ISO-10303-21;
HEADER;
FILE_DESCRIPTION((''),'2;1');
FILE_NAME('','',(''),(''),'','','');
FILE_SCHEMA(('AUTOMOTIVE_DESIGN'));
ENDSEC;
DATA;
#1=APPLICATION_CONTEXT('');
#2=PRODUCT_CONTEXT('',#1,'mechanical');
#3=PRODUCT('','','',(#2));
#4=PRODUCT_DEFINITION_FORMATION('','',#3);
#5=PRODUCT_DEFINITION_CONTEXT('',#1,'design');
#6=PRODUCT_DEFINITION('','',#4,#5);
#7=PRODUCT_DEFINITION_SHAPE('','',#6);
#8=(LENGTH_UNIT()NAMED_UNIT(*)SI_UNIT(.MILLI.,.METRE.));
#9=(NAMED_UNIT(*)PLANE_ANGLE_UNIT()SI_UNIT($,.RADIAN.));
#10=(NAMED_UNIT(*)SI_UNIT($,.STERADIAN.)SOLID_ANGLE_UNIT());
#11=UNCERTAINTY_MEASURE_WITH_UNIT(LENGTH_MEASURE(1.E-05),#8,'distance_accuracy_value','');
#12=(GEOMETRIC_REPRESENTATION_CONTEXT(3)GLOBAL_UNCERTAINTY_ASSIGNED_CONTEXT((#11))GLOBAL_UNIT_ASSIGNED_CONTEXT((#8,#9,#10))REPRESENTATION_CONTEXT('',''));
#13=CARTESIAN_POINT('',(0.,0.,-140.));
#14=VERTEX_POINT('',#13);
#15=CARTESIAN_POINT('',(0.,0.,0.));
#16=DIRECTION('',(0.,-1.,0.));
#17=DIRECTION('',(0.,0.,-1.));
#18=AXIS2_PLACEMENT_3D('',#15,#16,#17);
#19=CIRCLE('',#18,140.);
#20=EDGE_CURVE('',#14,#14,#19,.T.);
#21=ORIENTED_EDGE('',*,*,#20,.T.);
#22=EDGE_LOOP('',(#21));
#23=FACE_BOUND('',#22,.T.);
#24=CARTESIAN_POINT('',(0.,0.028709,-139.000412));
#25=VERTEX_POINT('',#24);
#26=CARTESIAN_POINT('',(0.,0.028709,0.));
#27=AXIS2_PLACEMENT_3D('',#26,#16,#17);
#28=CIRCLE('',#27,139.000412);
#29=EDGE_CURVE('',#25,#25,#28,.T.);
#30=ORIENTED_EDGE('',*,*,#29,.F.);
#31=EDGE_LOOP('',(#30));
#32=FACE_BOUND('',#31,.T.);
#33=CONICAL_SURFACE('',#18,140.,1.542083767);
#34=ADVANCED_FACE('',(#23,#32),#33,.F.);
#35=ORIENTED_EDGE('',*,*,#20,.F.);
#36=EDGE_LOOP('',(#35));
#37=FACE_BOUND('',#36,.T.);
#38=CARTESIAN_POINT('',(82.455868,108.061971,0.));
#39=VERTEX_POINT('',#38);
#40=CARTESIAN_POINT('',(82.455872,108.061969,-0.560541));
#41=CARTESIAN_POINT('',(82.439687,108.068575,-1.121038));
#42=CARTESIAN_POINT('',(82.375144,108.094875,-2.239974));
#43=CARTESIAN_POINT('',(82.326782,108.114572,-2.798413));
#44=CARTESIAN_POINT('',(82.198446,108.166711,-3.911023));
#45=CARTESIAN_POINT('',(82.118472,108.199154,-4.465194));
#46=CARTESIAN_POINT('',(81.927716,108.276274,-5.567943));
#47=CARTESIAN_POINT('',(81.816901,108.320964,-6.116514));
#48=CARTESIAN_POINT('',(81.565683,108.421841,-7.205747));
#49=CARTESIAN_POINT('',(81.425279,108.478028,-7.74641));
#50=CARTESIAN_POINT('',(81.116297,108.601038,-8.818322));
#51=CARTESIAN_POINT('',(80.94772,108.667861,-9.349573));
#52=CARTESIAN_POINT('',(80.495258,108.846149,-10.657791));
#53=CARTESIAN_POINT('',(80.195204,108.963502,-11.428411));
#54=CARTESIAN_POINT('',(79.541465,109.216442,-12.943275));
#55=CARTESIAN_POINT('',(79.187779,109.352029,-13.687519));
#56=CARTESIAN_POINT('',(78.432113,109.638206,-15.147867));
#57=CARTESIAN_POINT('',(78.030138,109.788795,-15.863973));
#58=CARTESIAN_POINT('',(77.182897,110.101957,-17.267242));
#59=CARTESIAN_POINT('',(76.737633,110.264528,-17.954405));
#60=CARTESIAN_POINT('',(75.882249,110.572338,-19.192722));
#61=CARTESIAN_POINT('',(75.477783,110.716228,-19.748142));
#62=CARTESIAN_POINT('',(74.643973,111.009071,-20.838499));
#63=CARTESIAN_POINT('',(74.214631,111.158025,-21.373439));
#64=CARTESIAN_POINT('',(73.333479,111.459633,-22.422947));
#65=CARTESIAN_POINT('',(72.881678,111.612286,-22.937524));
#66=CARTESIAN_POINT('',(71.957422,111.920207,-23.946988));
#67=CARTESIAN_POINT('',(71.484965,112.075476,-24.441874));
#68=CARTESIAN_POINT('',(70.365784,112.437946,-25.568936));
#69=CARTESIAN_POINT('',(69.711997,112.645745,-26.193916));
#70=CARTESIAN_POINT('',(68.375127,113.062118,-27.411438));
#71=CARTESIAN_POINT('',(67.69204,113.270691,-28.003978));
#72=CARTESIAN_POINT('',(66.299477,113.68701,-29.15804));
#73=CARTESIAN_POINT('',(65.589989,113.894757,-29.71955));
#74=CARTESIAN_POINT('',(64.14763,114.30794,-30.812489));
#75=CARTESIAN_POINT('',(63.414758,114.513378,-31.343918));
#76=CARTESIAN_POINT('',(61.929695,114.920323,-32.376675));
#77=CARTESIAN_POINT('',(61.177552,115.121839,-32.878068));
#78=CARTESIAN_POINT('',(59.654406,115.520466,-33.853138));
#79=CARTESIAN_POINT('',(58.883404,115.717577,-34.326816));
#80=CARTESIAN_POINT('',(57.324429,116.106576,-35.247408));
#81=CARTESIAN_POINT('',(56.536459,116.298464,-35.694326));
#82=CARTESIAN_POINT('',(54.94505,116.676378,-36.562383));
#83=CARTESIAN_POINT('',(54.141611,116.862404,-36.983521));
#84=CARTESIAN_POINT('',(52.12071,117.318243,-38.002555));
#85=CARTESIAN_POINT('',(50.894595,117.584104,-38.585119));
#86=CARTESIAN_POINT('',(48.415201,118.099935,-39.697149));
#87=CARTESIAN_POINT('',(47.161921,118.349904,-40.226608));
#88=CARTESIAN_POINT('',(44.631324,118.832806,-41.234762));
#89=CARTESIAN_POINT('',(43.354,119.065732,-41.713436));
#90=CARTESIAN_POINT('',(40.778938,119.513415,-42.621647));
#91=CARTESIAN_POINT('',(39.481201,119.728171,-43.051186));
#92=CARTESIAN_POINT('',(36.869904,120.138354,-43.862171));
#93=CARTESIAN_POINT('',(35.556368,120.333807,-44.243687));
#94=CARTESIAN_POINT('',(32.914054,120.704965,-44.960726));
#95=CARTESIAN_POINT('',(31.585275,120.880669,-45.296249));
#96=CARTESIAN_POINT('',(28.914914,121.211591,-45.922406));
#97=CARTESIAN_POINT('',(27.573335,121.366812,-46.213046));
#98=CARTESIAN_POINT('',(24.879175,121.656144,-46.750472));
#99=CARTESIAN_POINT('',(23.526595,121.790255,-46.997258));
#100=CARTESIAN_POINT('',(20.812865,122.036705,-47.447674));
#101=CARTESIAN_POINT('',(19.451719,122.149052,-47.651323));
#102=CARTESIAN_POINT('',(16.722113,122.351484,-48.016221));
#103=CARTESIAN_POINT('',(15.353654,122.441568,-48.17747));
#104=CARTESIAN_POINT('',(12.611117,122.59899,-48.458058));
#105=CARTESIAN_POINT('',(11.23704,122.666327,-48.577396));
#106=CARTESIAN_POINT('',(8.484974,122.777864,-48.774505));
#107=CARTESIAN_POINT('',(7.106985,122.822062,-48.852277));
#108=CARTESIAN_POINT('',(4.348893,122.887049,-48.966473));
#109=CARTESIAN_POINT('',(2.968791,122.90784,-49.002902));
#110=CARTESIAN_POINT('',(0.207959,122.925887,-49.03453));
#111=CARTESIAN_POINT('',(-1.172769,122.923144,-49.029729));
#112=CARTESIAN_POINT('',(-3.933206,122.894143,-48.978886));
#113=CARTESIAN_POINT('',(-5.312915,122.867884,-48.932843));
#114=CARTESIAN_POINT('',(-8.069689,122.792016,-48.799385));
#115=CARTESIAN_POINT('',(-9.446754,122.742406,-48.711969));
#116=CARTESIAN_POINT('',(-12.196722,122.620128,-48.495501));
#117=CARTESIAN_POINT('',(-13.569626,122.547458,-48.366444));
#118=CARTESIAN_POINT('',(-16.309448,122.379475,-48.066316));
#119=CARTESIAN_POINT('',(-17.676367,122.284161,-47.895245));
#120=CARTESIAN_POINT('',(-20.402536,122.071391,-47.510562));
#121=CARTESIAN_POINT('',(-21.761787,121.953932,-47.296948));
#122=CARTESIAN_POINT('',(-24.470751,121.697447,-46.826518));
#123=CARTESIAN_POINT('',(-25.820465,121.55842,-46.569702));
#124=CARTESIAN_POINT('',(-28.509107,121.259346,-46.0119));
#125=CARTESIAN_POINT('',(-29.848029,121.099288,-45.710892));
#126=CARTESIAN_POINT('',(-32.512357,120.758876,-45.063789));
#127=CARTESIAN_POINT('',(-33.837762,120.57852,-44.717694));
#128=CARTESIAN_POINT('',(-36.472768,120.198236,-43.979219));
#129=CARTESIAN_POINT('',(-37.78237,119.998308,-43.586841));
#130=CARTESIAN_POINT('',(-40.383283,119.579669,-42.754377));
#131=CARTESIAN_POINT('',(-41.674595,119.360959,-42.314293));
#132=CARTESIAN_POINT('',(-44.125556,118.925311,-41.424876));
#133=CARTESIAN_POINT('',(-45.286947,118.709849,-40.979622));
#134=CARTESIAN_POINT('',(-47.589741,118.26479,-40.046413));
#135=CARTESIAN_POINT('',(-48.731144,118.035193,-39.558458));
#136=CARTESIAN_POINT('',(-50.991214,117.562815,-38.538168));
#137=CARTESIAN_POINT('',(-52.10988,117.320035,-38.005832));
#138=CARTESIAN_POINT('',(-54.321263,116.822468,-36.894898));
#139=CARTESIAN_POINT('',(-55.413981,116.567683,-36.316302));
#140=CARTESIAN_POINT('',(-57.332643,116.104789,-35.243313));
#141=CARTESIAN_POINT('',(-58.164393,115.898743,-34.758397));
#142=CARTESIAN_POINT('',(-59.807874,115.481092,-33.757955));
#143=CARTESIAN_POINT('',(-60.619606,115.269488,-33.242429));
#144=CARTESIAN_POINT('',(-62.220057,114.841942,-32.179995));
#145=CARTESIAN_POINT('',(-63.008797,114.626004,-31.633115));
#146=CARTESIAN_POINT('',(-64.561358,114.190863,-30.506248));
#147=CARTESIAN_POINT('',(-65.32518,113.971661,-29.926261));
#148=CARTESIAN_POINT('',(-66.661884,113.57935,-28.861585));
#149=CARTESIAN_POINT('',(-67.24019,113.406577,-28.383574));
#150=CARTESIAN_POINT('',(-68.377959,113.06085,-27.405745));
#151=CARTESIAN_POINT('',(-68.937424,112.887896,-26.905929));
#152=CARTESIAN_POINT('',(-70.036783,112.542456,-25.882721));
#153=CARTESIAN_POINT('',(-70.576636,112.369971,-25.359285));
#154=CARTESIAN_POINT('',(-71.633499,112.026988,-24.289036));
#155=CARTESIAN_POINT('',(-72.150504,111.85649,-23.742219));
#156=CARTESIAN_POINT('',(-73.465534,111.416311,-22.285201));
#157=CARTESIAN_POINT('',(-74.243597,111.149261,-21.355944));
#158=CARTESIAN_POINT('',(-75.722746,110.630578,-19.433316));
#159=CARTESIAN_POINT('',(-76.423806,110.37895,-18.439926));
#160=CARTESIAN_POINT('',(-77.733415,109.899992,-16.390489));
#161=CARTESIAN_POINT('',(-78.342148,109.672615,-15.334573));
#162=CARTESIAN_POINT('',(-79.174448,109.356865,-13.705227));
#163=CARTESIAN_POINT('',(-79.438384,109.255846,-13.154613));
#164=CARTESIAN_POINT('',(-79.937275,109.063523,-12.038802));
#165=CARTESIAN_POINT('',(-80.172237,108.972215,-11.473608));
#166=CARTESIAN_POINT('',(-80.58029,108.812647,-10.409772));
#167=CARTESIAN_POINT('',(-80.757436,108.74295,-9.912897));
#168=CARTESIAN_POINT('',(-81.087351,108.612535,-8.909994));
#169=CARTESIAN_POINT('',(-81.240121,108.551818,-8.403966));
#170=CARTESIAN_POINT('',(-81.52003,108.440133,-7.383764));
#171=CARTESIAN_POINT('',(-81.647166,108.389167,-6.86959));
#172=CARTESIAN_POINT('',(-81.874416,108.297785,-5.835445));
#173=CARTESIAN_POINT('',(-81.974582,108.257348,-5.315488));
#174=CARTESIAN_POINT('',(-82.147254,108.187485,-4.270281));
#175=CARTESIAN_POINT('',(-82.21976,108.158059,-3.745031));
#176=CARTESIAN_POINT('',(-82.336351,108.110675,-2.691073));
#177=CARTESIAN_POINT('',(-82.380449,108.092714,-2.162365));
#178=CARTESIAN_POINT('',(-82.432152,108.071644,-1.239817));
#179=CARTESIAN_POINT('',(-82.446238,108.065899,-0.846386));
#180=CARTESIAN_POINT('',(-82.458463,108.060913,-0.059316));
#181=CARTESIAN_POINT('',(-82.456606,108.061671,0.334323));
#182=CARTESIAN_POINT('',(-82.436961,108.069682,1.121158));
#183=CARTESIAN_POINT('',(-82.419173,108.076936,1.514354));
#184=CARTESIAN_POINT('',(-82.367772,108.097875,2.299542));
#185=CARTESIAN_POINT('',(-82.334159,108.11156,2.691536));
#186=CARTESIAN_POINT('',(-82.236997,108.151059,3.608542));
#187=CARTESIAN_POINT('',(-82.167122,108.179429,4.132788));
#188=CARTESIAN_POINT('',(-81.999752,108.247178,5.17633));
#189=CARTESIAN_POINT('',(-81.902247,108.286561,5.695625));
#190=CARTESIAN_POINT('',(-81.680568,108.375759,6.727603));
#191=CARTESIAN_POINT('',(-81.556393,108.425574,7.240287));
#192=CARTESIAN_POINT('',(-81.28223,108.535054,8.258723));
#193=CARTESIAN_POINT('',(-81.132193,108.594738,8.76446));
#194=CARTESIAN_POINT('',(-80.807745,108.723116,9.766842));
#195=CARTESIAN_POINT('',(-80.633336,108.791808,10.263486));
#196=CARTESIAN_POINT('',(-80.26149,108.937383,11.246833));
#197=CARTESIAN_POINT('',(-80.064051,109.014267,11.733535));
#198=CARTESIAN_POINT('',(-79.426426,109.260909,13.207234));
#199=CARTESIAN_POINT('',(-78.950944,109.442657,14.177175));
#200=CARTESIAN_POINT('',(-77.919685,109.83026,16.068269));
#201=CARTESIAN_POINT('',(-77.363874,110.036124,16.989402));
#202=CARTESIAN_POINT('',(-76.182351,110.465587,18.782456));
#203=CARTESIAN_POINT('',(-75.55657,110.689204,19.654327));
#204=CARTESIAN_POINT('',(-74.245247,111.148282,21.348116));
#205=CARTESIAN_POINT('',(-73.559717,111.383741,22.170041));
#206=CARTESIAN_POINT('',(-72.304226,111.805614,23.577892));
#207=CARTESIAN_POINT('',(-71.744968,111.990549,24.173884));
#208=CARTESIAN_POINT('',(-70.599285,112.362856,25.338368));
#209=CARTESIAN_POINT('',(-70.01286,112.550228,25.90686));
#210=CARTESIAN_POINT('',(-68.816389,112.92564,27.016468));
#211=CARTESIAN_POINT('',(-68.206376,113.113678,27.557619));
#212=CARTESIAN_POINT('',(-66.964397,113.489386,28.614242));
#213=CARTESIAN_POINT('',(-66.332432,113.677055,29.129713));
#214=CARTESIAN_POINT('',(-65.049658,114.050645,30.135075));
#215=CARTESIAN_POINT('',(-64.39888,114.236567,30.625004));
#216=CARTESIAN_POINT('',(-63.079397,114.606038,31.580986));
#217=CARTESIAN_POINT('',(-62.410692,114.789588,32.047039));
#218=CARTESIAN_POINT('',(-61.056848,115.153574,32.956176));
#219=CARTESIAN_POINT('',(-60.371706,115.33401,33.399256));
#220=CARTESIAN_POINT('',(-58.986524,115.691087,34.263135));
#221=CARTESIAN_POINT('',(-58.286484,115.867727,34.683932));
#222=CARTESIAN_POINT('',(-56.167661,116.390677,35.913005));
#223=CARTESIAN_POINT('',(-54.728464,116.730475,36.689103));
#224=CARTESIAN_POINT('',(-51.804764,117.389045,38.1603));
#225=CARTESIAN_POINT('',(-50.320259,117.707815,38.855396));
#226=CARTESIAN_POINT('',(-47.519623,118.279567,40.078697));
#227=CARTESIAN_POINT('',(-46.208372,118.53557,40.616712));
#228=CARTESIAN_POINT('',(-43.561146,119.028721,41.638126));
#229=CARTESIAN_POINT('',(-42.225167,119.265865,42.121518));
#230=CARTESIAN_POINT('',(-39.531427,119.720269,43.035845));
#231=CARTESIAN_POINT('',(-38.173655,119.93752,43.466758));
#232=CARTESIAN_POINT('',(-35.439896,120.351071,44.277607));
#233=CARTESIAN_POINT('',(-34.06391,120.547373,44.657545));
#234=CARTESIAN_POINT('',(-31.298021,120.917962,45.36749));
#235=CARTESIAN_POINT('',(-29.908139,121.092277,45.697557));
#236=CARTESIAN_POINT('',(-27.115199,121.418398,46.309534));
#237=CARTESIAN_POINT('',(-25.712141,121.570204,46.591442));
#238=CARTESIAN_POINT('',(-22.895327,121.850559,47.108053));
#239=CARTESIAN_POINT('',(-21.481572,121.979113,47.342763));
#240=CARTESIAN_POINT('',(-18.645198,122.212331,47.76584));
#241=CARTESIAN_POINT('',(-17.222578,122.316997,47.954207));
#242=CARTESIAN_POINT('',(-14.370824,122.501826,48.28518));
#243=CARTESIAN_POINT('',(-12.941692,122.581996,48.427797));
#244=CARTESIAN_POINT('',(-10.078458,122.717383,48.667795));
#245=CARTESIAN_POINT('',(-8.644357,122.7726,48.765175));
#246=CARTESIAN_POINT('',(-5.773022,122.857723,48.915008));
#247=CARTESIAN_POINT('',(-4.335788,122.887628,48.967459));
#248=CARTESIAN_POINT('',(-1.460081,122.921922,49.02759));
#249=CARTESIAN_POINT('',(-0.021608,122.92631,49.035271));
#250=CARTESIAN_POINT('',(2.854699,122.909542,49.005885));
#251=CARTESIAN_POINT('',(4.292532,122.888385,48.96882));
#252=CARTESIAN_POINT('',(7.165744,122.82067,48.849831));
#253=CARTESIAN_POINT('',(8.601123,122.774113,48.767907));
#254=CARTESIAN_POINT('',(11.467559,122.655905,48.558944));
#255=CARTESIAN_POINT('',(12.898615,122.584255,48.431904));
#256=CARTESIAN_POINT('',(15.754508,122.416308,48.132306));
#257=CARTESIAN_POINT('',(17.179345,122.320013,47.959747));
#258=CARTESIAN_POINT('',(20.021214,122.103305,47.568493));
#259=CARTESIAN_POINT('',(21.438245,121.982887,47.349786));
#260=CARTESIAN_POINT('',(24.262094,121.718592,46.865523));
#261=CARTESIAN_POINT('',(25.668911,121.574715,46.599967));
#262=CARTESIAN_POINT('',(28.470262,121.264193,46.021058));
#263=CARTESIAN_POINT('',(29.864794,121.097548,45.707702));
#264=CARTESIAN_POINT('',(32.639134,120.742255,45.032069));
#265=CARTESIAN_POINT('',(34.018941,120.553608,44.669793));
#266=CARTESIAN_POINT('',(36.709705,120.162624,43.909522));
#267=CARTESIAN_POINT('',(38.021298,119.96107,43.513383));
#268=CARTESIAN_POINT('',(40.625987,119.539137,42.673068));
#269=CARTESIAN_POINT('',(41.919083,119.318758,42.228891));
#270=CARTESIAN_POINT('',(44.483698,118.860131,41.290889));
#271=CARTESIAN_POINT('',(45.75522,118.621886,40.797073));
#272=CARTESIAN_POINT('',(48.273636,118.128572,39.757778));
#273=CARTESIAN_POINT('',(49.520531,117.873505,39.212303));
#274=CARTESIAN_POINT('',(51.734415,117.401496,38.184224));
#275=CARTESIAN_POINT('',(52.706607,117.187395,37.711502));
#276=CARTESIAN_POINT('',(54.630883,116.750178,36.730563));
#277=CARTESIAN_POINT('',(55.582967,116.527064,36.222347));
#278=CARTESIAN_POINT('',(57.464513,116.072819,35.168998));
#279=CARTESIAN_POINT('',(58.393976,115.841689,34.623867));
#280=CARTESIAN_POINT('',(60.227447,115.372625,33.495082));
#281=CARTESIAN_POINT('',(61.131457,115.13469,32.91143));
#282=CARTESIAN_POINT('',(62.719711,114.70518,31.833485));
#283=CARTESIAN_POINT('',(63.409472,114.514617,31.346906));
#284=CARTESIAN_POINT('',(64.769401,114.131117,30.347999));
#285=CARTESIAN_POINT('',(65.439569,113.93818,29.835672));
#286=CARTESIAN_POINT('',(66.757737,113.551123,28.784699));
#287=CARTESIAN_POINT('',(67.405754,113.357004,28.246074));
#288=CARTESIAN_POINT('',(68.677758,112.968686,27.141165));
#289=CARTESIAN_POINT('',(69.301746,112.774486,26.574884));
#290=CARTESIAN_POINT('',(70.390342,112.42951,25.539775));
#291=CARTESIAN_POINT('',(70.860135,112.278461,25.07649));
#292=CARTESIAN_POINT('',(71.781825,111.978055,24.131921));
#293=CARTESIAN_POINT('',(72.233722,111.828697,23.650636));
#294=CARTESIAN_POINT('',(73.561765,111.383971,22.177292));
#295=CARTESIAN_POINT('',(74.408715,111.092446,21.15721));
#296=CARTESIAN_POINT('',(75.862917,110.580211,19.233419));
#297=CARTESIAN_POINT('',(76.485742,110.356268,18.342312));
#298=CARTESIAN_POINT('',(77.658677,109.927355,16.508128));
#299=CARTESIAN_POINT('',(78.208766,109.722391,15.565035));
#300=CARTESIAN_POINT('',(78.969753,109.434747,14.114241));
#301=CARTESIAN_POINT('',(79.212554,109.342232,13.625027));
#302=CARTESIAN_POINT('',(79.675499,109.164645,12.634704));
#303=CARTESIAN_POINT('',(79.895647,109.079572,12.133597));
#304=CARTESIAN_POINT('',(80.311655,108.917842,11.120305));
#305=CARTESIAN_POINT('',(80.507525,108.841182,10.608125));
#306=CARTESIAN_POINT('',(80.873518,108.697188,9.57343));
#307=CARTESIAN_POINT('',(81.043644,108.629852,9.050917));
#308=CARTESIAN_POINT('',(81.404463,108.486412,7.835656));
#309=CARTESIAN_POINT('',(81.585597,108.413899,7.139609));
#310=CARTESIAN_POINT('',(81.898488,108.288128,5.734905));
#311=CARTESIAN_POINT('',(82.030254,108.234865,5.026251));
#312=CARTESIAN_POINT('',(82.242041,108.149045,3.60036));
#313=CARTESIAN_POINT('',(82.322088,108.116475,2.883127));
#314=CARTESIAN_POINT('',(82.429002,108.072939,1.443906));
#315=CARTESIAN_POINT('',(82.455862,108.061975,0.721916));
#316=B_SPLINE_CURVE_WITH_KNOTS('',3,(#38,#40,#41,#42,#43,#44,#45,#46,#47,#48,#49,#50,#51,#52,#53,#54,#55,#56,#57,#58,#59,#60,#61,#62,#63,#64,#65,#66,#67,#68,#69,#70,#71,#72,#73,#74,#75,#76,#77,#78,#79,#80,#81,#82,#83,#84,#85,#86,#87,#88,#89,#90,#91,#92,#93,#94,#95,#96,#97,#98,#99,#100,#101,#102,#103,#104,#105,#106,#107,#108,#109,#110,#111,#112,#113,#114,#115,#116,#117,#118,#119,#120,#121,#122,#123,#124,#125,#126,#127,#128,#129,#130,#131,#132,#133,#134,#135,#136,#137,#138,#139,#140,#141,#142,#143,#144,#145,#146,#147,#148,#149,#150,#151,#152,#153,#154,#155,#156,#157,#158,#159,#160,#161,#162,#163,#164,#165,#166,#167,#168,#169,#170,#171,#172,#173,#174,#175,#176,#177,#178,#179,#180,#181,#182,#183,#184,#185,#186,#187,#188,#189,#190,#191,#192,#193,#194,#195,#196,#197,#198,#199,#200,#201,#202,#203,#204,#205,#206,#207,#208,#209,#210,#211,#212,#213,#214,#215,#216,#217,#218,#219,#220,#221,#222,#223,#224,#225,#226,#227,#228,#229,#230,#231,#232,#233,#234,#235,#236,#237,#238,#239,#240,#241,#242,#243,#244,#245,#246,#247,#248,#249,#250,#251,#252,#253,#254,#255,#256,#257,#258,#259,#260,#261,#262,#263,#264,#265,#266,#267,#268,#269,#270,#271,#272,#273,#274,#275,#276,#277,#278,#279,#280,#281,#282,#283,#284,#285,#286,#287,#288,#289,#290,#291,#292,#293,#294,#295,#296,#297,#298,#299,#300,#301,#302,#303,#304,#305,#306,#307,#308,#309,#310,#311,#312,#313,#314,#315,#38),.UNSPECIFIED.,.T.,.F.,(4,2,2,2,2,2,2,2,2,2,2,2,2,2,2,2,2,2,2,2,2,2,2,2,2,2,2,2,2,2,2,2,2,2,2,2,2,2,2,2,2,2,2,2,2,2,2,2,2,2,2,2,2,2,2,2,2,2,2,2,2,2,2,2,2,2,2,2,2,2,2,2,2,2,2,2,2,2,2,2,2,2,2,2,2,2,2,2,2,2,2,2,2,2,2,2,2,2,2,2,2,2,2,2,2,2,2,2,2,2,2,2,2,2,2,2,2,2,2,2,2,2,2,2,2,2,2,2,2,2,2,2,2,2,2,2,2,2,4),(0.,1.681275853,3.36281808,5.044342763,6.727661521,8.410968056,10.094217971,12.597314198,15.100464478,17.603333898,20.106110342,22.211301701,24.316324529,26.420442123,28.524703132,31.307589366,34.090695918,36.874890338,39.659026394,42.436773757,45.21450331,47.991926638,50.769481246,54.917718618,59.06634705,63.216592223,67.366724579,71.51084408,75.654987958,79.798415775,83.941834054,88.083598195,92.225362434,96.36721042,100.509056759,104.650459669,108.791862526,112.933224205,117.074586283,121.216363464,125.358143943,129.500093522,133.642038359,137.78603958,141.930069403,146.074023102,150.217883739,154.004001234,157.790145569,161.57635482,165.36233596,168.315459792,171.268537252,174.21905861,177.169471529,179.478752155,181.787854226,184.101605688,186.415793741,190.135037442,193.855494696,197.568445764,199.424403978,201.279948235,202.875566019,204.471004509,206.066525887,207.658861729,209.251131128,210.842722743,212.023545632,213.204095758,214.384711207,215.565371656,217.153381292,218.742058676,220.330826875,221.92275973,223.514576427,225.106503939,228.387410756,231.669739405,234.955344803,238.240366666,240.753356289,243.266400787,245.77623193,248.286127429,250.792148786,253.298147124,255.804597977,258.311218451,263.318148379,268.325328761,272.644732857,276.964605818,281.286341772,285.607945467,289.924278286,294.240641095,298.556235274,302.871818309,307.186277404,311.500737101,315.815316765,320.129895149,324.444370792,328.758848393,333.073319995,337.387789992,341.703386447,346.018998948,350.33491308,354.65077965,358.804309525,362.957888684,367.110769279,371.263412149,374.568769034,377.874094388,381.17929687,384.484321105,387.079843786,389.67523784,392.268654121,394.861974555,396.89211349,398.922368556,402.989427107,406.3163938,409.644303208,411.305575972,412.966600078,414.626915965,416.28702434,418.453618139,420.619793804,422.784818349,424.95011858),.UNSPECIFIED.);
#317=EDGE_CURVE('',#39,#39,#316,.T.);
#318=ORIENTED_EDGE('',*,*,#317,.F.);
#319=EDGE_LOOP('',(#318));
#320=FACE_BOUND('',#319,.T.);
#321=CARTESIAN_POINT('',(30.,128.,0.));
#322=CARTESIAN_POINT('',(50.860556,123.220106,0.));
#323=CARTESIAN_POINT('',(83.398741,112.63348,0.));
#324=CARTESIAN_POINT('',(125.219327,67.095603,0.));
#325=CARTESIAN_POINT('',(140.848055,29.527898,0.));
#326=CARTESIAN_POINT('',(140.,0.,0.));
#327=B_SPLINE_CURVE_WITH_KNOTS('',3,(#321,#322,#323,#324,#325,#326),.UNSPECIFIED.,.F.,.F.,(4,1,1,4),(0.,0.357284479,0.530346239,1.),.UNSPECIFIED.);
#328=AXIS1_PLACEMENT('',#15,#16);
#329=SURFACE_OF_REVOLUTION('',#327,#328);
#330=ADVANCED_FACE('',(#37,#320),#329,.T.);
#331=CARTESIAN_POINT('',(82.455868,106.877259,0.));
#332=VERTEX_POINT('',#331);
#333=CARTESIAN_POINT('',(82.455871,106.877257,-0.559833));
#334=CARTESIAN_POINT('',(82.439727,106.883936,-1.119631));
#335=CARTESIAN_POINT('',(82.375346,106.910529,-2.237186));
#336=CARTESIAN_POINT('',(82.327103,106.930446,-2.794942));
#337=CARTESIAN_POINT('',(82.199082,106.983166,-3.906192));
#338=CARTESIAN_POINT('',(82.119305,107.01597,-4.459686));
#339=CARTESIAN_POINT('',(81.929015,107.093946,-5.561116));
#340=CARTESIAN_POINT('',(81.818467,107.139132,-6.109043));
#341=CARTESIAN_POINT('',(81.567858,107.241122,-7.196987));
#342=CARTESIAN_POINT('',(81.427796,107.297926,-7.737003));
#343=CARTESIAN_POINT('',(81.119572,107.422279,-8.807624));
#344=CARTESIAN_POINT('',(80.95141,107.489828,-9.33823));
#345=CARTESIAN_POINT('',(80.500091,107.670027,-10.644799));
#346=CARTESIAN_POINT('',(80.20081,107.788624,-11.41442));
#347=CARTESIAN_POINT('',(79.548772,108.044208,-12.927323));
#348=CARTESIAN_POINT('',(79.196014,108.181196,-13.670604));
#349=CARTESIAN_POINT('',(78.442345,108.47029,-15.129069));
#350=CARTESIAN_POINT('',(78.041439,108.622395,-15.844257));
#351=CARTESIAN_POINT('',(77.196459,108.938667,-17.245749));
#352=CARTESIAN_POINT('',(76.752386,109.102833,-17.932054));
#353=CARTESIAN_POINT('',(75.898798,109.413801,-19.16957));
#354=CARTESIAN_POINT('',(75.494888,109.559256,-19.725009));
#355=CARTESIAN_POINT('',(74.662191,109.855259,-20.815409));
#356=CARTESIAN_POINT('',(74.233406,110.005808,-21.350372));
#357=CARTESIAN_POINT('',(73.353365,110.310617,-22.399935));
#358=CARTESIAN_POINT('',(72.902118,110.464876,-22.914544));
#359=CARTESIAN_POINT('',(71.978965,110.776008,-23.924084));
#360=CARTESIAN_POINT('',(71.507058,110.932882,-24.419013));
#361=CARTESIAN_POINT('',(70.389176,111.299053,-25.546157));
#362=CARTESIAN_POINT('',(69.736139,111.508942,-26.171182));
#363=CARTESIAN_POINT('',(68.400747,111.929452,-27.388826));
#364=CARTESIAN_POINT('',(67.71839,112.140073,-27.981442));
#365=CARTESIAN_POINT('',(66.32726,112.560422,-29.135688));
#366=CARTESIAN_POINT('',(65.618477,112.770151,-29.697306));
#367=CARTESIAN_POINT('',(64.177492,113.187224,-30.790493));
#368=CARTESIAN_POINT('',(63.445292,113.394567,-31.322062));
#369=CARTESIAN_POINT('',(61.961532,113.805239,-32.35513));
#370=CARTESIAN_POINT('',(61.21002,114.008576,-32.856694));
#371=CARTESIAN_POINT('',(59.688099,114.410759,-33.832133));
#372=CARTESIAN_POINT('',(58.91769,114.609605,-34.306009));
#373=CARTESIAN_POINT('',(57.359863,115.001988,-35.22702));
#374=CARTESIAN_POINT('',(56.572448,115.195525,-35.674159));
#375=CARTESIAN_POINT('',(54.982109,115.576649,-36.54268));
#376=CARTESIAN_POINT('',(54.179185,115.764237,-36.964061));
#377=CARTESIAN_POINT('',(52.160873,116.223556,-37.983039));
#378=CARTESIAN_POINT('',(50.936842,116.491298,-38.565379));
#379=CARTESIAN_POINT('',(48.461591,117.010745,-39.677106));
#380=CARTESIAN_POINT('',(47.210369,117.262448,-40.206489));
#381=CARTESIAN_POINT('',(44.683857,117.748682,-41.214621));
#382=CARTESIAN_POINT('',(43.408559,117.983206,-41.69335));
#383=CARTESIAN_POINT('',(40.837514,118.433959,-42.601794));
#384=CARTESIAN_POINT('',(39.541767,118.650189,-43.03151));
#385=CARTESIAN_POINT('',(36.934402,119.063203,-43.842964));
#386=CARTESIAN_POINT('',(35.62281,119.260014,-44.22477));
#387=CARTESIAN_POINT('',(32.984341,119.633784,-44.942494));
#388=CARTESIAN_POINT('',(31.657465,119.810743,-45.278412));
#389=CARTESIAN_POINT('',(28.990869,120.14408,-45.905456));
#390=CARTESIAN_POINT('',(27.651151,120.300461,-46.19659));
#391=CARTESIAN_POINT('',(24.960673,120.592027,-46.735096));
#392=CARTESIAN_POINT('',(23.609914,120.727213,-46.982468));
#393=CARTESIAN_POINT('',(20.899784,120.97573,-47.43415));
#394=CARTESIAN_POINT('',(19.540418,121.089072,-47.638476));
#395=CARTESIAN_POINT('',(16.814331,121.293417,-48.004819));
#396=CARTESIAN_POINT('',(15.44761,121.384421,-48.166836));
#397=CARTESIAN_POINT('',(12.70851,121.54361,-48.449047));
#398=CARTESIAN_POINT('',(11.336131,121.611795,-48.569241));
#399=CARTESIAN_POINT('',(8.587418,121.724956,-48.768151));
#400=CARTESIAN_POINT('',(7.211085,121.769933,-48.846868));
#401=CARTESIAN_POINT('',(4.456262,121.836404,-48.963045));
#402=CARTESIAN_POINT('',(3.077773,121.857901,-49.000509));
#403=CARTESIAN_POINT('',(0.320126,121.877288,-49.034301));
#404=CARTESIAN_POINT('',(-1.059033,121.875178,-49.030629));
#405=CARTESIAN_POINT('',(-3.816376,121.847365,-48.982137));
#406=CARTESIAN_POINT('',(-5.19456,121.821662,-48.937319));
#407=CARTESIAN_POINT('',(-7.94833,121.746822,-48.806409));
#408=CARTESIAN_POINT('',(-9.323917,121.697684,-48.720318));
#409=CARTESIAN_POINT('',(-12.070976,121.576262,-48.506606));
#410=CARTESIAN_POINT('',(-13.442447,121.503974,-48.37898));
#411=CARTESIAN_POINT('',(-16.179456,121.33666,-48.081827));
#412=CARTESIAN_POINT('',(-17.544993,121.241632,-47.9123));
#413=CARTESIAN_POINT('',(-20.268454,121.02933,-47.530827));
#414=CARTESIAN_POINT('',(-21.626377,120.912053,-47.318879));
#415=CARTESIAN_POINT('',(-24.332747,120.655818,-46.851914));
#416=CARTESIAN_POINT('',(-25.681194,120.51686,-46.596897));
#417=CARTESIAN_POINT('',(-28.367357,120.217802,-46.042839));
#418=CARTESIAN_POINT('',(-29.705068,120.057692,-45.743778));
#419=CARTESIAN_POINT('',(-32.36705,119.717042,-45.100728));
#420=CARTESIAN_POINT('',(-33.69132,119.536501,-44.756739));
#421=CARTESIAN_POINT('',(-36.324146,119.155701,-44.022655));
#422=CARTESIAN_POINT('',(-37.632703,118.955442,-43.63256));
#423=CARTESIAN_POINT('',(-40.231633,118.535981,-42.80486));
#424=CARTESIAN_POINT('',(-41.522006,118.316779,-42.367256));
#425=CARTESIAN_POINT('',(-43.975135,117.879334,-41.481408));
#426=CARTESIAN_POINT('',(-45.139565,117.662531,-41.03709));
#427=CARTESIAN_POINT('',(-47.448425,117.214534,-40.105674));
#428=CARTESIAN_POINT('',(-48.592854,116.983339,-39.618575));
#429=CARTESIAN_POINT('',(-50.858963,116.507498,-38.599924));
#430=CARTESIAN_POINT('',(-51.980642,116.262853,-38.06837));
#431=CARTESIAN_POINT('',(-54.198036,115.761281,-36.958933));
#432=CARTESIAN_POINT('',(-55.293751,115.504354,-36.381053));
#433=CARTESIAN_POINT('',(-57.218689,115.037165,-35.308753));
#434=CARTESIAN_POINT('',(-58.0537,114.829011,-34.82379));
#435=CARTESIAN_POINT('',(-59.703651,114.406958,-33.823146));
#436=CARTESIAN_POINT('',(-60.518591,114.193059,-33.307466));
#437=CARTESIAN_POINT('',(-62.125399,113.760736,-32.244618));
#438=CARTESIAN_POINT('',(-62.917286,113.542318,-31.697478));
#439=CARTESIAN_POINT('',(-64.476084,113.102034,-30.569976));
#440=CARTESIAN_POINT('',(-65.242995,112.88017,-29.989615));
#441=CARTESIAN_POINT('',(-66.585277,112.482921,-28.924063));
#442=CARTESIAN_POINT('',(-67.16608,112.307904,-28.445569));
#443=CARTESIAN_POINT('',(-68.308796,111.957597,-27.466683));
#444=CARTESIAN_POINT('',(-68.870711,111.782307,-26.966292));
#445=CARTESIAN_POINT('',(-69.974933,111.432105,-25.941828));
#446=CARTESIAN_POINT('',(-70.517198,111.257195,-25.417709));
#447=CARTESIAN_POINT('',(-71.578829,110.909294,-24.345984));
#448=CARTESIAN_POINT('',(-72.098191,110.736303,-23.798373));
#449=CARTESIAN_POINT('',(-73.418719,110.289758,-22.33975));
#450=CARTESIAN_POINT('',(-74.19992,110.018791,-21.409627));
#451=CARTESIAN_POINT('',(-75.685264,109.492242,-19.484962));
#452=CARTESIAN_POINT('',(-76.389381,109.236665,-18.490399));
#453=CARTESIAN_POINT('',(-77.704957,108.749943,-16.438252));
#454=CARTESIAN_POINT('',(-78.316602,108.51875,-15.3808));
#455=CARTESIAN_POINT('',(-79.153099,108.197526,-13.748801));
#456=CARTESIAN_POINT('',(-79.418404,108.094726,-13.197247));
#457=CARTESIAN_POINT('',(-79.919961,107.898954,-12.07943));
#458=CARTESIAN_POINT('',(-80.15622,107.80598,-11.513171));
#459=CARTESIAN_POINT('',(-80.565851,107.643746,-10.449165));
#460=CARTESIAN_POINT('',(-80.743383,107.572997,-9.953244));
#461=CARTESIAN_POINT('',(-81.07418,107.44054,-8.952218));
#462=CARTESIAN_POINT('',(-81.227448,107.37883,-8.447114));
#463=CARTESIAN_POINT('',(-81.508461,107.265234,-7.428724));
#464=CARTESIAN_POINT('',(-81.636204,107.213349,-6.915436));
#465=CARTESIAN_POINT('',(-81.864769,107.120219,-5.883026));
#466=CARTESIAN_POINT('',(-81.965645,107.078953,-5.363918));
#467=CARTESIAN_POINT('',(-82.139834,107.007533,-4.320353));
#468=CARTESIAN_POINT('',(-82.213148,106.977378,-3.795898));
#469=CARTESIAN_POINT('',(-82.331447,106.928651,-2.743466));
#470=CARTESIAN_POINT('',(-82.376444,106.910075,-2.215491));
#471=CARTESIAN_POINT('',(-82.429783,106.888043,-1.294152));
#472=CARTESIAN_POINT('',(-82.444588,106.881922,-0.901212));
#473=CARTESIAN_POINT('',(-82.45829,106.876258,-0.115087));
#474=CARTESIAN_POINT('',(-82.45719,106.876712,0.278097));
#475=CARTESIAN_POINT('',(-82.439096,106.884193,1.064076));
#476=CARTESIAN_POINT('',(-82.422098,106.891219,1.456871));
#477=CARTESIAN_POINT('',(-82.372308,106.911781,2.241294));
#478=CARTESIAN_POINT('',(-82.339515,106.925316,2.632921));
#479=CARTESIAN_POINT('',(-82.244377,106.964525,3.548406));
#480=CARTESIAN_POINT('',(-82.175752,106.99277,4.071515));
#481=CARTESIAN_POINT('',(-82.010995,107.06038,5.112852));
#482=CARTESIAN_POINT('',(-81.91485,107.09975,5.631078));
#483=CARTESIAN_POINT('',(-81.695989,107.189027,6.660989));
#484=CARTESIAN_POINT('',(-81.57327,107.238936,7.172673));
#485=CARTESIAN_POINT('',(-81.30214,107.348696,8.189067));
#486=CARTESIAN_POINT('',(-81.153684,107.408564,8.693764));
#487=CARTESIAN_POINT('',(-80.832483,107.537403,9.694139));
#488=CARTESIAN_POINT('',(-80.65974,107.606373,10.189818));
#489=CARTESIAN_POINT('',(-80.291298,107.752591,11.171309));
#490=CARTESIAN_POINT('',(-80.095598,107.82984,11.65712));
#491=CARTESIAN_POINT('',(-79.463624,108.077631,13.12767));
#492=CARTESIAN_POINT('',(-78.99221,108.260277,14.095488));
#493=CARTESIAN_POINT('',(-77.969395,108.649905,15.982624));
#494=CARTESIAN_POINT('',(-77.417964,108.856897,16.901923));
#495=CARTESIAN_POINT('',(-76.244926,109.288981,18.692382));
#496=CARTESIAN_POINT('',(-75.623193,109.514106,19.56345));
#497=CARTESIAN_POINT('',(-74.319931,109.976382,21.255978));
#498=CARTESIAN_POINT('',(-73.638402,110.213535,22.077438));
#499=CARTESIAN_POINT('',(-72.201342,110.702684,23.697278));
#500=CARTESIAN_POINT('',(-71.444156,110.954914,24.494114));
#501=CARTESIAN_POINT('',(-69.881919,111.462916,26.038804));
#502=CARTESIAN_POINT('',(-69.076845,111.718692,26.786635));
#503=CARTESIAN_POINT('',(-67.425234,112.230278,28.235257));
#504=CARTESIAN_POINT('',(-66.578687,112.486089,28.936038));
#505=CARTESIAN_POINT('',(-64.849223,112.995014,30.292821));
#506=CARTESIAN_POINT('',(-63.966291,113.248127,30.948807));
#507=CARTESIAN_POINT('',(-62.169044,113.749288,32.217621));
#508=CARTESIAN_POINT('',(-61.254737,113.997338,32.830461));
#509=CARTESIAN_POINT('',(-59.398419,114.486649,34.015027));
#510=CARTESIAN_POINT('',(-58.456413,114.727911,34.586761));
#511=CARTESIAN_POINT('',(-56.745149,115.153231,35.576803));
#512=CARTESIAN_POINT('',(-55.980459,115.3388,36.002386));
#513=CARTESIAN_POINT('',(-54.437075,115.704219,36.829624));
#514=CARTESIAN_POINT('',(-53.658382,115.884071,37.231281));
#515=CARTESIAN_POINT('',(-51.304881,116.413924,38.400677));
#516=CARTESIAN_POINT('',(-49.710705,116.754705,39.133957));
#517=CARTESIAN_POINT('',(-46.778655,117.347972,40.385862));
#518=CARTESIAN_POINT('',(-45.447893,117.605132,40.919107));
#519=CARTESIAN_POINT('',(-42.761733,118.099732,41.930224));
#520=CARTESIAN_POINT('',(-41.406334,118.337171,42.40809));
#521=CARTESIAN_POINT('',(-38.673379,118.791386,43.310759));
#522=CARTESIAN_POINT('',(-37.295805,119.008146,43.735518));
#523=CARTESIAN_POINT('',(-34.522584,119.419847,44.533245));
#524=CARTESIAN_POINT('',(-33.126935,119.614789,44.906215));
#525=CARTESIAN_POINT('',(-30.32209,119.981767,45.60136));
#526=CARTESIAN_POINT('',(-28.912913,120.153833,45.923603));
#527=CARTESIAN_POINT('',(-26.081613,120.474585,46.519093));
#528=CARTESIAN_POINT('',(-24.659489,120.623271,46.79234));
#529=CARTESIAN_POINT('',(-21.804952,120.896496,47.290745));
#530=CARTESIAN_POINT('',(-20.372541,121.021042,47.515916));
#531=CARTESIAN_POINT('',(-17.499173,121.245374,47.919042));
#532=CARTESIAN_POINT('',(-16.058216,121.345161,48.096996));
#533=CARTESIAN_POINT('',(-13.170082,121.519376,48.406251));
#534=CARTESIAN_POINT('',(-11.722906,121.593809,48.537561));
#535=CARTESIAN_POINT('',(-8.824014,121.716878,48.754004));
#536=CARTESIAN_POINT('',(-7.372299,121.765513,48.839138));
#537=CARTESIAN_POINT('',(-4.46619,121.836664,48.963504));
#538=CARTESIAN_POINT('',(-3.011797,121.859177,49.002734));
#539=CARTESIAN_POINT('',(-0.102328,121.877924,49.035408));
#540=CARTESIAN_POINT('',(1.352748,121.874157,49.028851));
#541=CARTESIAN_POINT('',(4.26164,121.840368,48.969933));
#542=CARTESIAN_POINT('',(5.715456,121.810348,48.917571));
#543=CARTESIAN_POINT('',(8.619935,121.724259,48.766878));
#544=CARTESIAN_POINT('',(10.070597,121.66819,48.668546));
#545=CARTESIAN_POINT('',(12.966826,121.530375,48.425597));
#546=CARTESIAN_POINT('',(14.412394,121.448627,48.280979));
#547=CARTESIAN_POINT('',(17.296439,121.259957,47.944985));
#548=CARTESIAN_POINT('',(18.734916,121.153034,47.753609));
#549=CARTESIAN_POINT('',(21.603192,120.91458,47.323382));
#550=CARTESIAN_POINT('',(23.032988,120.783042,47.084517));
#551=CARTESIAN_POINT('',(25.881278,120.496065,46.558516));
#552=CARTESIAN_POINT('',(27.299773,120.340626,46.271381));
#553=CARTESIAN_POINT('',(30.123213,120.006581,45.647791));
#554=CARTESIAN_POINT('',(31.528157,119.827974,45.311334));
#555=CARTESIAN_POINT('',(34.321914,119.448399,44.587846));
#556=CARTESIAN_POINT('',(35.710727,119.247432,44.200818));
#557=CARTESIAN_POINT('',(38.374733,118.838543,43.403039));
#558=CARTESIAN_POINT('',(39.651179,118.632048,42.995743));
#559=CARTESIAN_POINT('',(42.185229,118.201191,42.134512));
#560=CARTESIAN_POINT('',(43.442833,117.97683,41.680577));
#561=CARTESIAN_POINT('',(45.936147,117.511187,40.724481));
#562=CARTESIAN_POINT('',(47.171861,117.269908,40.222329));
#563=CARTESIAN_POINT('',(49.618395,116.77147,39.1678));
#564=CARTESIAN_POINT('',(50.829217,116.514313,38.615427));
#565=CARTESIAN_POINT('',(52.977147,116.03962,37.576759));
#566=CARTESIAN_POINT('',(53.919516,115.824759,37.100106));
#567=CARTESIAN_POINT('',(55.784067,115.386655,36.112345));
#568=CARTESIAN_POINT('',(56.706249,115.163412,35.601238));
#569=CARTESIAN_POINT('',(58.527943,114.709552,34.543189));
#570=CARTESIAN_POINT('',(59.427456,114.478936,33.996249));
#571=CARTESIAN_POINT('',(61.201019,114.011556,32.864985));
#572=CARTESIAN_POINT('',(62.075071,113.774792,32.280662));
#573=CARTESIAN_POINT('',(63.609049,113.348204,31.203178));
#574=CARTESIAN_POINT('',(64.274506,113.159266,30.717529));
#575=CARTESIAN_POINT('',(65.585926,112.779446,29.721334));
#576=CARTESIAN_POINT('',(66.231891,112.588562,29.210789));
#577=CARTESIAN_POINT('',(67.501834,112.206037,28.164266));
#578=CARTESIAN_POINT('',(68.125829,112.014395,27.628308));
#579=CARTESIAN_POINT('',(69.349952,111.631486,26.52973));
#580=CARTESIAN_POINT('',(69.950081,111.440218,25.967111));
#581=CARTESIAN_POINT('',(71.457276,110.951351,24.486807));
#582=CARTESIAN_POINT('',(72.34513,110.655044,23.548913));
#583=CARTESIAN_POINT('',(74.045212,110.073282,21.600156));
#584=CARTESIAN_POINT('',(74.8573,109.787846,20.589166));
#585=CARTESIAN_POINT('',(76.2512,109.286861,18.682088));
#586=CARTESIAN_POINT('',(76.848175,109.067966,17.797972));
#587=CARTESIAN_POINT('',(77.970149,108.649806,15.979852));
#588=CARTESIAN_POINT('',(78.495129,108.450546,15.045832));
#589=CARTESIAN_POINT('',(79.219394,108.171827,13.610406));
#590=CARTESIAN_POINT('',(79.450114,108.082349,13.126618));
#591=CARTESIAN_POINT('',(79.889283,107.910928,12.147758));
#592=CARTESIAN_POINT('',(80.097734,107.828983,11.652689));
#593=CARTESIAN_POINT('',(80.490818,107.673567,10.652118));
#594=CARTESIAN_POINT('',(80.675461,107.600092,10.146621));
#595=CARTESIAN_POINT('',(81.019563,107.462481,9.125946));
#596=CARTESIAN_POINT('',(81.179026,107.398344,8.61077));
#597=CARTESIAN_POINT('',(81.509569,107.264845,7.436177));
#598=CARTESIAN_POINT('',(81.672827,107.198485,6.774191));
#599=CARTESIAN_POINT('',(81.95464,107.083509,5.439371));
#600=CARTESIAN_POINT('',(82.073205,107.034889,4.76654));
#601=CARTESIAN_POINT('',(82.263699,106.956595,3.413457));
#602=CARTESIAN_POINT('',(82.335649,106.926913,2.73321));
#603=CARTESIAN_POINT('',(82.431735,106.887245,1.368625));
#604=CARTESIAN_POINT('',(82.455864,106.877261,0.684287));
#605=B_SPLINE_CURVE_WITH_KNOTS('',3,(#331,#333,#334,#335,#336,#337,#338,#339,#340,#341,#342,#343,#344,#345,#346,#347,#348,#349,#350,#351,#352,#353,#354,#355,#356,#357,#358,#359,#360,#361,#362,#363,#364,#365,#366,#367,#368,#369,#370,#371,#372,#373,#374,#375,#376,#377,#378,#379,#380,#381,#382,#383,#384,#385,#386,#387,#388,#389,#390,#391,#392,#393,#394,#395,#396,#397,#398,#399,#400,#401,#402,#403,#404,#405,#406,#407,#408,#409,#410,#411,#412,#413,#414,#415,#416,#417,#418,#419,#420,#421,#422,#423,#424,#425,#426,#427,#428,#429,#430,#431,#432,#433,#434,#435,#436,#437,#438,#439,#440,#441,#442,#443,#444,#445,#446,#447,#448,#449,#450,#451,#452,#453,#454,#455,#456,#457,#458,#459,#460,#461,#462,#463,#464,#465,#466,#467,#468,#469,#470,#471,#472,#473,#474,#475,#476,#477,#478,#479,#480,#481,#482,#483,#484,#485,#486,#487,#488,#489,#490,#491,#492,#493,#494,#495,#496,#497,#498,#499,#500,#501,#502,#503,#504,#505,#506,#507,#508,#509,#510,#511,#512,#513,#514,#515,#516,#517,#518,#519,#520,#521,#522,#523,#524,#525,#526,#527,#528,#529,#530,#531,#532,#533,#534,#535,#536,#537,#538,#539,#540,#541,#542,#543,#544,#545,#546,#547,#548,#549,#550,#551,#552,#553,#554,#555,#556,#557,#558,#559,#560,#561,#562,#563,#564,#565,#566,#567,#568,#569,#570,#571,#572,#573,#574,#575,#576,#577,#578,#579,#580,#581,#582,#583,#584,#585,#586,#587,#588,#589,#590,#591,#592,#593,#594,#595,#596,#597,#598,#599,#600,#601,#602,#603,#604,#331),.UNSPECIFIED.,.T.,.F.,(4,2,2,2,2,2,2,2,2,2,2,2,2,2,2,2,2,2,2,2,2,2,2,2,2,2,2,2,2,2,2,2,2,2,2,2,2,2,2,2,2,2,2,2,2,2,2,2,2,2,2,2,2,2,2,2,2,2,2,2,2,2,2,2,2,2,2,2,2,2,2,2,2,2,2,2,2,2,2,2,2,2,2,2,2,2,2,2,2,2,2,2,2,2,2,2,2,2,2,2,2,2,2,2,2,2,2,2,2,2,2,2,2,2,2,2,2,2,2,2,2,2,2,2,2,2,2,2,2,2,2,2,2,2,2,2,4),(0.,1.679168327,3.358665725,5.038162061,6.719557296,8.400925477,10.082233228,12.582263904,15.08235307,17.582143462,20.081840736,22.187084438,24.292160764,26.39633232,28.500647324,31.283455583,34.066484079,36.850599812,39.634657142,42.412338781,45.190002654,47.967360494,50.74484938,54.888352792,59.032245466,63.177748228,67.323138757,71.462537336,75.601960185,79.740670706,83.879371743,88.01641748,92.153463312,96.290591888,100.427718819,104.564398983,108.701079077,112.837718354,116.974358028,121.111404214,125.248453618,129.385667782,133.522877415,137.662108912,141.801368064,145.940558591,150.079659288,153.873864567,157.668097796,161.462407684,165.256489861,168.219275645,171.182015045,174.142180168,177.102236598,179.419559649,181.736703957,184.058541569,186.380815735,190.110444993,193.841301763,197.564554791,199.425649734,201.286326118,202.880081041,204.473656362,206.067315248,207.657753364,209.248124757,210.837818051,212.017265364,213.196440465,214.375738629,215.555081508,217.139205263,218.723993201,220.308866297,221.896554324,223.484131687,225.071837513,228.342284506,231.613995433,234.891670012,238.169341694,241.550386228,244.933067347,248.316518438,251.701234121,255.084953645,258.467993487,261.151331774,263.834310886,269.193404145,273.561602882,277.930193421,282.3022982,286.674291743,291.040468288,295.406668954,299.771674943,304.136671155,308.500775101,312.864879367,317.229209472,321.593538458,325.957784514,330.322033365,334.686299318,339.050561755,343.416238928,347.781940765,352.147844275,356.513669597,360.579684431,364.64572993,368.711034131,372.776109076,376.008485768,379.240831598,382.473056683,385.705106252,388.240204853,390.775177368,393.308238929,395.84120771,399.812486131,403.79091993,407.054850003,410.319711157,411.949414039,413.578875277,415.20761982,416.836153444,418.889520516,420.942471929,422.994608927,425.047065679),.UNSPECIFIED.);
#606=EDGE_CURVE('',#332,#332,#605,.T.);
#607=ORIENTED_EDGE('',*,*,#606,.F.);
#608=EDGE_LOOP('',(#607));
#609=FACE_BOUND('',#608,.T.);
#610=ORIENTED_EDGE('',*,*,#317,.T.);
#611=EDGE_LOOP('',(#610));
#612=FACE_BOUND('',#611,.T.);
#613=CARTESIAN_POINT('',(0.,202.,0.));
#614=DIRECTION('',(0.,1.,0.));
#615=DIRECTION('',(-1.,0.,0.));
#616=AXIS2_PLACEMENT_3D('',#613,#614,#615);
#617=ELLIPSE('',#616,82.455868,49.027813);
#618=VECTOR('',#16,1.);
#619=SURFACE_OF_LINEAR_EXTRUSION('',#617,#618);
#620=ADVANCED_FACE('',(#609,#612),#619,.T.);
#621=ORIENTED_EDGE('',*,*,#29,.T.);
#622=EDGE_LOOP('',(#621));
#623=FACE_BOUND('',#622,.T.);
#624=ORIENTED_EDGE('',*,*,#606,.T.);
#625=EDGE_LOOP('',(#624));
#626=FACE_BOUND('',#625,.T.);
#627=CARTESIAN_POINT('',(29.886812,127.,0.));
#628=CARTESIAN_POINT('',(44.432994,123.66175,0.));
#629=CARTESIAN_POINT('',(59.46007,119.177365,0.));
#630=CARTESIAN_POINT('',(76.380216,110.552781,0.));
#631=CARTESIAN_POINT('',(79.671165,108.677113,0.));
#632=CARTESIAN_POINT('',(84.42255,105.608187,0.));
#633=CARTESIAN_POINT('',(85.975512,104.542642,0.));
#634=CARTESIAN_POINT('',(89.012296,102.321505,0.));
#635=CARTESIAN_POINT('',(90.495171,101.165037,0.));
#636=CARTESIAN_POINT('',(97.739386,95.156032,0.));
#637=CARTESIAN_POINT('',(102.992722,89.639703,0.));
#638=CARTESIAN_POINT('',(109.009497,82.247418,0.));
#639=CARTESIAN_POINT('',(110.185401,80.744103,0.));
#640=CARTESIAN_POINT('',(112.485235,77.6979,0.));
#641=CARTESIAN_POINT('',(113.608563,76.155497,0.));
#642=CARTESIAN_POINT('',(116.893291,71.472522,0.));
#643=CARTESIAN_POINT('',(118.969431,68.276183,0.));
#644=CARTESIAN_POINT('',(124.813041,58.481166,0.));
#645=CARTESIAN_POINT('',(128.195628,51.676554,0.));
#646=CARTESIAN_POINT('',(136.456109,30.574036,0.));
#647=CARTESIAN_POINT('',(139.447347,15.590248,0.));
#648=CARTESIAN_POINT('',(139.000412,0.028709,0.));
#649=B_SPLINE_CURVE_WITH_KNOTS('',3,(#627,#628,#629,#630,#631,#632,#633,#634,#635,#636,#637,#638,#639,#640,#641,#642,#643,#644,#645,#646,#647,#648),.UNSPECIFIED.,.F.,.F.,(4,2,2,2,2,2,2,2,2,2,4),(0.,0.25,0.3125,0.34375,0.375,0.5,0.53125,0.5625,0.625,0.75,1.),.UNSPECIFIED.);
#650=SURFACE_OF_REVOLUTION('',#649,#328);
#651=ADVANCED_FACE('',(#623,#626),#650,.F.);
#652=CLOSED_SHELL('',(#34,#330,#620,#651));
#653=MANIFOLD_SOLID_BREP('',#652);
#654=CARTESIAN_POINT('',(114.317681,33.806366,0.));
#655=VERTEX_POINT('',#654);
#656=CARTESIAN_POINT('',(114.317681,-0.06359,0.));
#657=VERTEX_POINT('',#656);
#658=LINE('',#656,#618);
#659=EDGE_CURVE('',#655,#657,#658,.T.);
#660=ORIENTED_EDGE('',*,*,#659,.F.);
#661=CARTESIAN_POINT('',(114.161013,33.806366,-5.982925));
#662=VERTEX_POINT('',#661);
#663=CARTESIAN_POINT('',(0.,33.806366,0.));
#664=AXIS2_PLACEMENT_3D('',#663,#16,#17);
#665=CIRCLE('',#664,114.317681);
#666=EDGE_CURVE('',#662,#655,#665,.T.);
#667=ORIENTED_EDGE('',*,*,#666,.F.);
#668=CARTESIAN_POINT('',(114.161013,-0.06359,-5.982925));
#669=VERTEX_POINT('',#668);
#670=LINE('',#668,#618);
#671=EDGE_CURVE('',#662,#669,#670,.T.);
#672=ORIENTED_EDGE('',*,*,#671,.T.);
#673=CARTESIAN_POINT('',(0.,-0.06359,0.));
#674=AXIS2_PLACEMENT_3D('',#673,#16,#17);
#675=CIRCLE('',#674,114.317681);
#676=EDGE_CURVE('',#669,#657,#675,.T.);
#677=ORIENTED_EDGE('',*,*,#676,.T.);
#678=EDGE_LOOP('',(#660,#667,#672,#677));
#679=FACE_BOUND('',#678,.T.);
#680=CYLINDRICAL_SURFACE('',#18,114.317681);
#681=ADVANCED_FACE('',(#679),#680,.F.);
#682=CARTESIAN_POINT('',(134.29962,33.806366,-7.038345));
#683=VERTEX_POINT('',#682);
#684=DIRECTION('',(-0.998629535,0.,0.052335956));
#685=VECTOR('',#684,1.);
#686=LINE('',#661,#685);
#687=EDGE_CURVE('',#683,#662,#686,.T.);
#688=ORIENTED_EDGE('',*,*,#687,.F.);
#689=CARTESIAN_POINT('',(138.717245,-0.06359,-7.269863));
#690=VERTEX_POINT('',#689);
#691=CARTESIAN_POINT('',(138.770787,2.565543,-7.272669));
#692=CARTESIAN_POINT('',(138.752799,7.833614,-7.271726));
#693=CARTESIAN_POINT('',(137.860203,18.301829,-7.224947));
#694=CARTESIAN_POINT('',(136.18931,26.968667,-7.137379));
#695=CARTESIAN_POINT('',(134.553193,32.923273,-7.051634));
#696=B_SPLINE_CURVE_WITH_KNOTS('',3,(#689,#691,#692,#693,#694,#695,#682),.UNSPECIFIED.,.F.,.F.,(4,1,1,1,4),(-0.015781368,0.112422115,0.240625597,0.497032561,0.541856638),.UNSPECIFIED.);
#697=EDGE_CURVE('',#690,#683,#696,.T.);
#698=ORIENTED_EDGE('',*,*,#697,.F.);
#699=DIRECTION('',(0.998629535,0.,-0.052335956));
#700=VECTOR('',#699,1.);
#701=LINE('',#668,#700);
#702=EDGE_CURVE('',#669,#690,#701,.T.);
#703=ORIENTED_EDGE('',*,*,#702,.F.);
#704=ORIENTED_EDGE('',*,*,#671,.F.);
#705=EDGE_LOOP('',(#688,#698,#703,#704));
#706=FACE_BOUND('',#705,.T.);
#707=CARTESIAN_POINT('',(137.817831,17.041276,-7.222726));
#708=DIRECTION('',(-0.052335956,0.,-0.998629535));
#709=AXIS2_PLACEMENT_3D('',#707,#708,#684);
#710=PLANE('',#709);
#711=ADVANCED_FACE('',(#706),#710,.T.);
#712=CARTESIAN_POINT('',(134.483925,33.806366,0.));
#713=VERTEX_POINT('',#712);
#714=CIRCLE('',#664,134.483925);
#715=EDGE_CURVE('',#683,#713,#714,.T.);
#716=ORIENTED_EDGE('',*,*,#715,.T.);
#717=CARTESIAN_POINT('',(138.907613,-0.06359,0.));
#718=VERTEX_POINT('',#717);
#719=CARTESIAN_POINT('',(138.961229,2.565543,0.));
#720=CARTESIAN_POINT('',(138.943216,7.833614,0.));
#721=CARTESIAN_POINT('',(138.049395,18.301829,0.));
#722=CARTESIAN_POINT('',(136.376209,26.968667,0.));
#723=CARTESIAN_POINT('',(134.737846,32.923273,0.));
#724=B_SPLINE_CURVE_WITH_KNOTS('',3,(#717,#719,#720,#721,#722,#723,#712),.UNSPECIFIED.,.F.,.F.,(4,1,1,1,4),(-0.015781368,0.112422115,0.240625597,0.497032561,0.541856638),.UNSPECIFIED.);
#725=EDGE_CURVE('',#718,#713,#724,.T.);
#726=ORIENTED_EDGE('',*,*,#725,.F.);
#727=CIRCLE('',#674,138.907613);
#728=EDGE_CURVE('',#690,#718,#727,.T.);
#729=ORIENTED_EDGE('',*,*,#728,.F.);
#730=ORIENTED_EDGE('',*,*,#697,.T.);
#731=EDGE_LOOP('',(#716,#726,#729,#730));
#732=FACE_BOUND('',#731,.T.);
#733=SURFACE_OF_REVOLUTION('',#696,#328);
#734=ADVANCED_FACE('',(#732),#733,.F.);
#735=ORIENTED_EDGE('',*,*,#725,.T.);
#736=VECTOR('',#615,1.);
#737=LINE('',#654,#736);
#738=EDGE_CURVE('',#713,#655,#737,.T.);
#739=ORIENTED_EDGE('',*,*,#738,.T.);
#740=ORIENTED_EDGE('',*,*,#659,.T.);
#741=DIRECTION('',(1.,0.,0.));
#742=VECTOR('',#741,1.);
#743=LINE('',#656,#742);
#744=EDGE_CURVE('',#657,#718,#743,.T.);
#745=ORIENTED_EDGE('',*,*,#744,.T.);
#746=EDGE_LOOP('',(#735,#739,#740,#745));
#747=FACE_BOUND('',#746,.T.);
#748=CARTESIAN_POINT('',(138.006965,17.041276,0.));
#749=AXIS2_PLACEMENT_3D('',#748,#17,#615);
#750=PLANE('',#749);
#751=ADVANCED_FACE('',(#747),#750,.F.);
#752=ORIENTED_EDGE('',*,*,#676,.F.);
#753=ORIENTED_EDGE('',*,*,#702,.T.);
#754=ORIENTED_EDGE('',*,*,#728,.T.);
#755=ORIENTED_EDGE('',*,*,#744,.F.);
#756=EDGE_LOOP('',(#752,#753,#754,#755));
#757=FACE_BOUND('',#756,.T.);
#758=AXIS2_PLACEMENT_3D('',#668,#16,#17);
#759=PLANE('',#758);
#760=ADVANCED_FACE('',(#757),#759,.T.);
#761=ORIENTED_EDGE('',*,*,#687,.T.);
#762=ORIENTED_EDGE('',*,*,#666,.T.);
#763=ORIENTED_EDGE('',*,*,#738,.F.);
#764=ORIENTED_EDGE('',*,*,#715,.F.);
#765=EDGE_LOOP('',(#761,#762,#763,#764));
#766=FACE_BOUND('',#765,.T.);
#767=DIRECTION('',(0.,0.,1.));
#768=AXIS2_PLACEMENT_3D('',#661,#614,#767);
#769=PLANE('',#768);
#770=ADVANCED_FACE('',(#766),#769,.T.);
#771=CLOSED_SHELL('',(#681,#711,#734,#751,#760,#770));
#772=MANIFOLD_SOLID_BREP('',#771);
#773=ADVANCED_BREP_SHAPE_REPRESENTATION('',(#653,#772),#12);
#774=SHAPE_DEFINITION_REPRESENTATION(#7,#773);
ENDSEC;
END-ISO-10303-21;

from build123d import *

# Parameters (mm, degrees)
ROTATION_D_NN1_OUTLINE_W        = 0.113188128
ROTATION_D_NN1_OUTLINE_H        = 1
ROTATION_D_NN1_OUTLINE_W_2      = 29.886811872
SKIZZE2_RX                      = 82.455867631
SKIZZE2_RY                      = 49.027813186
SCHNITT_LINEAR_AUSTRAGEN1_DEPTH = 202
ROTATION2_ANGLE                 = 3


# Read off the part's stored shape, not the designer's step: Rotation-Dünn1
with BuildPart() as part:
    # Rotation-Dünn1 outline → Rotation-Dünn1 (revolve)
    with BuildSketch(Plane.XY):
        with BuildLine():
            Line((30, 127), (29.886811872, 127))
            add(Edge.make_bspline(
                [(29.886811872, 127), (29.924538025, 126.991342103), (29.962267412, 126.982676498), (30, 126.97400316)],
                knots=[0, 0, 0, 0, 0.000648386, 0.000648386, 0.000648386, 0.000648386], degree=3))
            Line((30, 126.97400316), (30, 127))
        make_face()
        with Locations((29.943405936, 127.5)):
            Rectangle(ROTATION_D_NN1_OUTLINE_W, ROTATION_D_NN1_OUTLINE_H)
        with Locations((14.943405936, 127.5)):
            Rectangle(ROTATION_D_NN1_OUTLINE_W_2, ROTATION_D_NN1_OUTLINE_H)
        with BuildLine():
            Line((30, 127), (30, 126.97400316))
            add(Edge.make_bspline(
                [(30, 126.97400316), (44.510930435, 123.638472658), (59.495176103, 119.159470388), (76.380216283, 110.552780869), (79.671165399, 108.677112642), (84.422549965, 105.608187262), (85.975511888, 104.542641875), (89.012296056, 102.321504936), (90.49517076, 101.165037475), (97.739385685, 95.156031588), (102.99272173, 89.639702729), (109.009496988, 82.247417665), (110.185400974, 80.744102894), (112.48523463, 77.697900025), (113.608562564, 76.155497402), (116.893290722, 71.472522119), (118.969431326, 68.276183218), (124.813040843, 58.481166274), (128.195628137, 51.67655385), (135.731724357, 32.424575519), (138.61688744, 19.516320947), (139.000412177, 6.138810058)],
                knots=[0.000648386, 0.000648386, 0.000648386, 0.000648386, 0.25, 0.25, 0.3125, 0.3125, 0.34375, 0.34375, 0.375, 0.375, 0.5, 0.5, 0.53125, 0.53125, 0.5625, 0.5625, 0.625, 0.625, 0.75, 0.75, 0.967115187, 0.967115187, 0.967115187, 0.967115187], degree=3))
            Line((139.000412177, 6.138810058), (139.000412177, 18.082835303))
            add(Edge.make_bspline(
                [(34.231854255, 127), (53.794868782, 122.23046394), (84.406099271, 111.53658079), (121.145862461, 71.531144113), (135.852614284, 40.724022307), (139.000412177, 18.082835303)],
                knots=[0.024087618, 0.024087618, 0.024087618, 0.024087618, 0.357284479, 0.530346239, 0.902596657, 0.902596657, 0.902596657, 0.902596657], degree=3))
            Line((34.231854255, 127), (30, 127))
        make_face()
        with BuildLine():
            Line((30, 128), (30, 127))
            Line((30, 127), (34.231854255, 127))
            add(Edge.make_bspline(
                [(30, 128), (31.406389392, 127.677746239), (32.817595948, 127.344801461), (34.231854255, 127)],
                knots=[0, 0, 0, 0, 0.024087618, 0.024087618, 0.024087618, 0.024087618], degree=3))
        make_face()
        with BuildLine():
            Line((139.000412177, 18.082835303), (139.000412177, 6.138810058))
            add(Edge.make_bspline(
                [(139.000412177, 6.138810058), (139.0585018, 4.112618545), (139.059201601, 2.075661872), (139.000412177, 0.028708614)],
                knots=[0.967115187, 0.967115187, 0.967115187, 0.967115187, 1, 1, 1, 1], degree=3))
            Line((139.000412177, 0.028708614), (140, 0.028708614))
            Line((140, 0.028708614), (140, 6.165779952))
            add(Edge.make_bspline(
                [(139.000412177, 18.082835303), (139.546235838, 14.156885796), (139.884849944, 10.18249532), (140, 6.165779952)],
                knots=[0.902596657, 0.902596657, 0.902596657, 0.902596657, 0.967144348, 0.967144348, 0.967144348, 0.967144348], degree=3))
        make_face()
        Polygon((140, 0.028708614), (139.000412177, 0.028708614), (140, 0), align=None)
        with BuildLine():
            Line((140, 0.028708614), (140, 0))
            add(Edge.make_bspline(
                [(140.000820677, 0.028708614), (140.000548407, 0.019139294), (140.000274848, 0.009569756), (140, 0)],
                knots=[0.999847789, 0.999847789, 0.999847789, 0.999847789, 1, 1, 1, 1], degree=3))
            Line((140.000820677, 0.028708614), (140, 0.028708614))
        make_face()
        with BuildLine():
            Line((140, 6.165779952), (140, 0.028708614))
            Line((140, 0.028708614), (140.000820677, 0.028708614))
            add(Edge.make_bspline(
                [(140.044228074, 3.081473717), (140.044228082, 2.066428849), (140.029845016, 1.048808097), (140.000820677, 0.028708614)],
                knots=[0.983621934, 0.983621934, 0.983621934, 0.983621934, 0.999847789, 0.999847789, 0.999847789, 0.999847789], degree=3))
            add(Edge.make_bspline(
                [(140, 6.165779952), (140.02939524, 5.140402132), (140.044228066, 4.112266139), (140.044228074, 3.081473717)],
                knots=[0.967144348, 0.967144348, 0.967144348, 0.967144348, 0.983621934, 0.983621934, 0.983621934, 0.983621934], degree=3))
        make_face()
    revolve(axis=Axis((0, 0, 0), (0, 1, 0)))

    # Skizze2 → Schnitt-Linear austragen1 (cut)
    with BuildSketch(Plane(origin=(0, 0, 0), x_dir=(1, 0, 0), z_dir=(0, 1, 0))):
        with Locations(Location((0, 0), (0, 0, 180))):
            Ellipse(SKIZZE2_RX, SKIZZE2_RY)
    extrude(amount=SCHNITT_LINEAR_AUSTRAGEN1_DEPTH, mode=Mode.SUBTRACT)


with BuildPart() as body_2:
    # Skizze3 → Rotation2 (revolve)
    with BuildSketch(Plane.XY):
        with BuildLine():
            Line((114.317680997, -0.063589627), (138.907613279, -0.063589627))
            add(Edge.make_bspline(
                [(138.907613279, -0.063589627), (138.961228599, 2.565543121), (138.943215579, 7.833614393), (138.049395211, 18.301828769), (136.376209287, 26.96866651), (134.737846199, 32.923272774), (134.48392544, 33.806365862)],
                knots=[-0.015781368, -0.015781368, -0.015781368, -0.015781368, 0.112422115, 0.240625597, 0.497032561, 0.541856638, 0.541856638, 0.541856638, 0.541856638], degree=3))
            Line((134.48392544, 33.806365862), (114.317680997, 33.806365862))
            Line((114.317680997, 33.806365862), (114.317680997, -0.063589627))
        make_face()
    revolve(axis=Axis((0, 0, 0), (0, 1, 0)), revolution_arc=ROTATION2_ANGLE)


solid = Compound([part.part, body_2.part])
